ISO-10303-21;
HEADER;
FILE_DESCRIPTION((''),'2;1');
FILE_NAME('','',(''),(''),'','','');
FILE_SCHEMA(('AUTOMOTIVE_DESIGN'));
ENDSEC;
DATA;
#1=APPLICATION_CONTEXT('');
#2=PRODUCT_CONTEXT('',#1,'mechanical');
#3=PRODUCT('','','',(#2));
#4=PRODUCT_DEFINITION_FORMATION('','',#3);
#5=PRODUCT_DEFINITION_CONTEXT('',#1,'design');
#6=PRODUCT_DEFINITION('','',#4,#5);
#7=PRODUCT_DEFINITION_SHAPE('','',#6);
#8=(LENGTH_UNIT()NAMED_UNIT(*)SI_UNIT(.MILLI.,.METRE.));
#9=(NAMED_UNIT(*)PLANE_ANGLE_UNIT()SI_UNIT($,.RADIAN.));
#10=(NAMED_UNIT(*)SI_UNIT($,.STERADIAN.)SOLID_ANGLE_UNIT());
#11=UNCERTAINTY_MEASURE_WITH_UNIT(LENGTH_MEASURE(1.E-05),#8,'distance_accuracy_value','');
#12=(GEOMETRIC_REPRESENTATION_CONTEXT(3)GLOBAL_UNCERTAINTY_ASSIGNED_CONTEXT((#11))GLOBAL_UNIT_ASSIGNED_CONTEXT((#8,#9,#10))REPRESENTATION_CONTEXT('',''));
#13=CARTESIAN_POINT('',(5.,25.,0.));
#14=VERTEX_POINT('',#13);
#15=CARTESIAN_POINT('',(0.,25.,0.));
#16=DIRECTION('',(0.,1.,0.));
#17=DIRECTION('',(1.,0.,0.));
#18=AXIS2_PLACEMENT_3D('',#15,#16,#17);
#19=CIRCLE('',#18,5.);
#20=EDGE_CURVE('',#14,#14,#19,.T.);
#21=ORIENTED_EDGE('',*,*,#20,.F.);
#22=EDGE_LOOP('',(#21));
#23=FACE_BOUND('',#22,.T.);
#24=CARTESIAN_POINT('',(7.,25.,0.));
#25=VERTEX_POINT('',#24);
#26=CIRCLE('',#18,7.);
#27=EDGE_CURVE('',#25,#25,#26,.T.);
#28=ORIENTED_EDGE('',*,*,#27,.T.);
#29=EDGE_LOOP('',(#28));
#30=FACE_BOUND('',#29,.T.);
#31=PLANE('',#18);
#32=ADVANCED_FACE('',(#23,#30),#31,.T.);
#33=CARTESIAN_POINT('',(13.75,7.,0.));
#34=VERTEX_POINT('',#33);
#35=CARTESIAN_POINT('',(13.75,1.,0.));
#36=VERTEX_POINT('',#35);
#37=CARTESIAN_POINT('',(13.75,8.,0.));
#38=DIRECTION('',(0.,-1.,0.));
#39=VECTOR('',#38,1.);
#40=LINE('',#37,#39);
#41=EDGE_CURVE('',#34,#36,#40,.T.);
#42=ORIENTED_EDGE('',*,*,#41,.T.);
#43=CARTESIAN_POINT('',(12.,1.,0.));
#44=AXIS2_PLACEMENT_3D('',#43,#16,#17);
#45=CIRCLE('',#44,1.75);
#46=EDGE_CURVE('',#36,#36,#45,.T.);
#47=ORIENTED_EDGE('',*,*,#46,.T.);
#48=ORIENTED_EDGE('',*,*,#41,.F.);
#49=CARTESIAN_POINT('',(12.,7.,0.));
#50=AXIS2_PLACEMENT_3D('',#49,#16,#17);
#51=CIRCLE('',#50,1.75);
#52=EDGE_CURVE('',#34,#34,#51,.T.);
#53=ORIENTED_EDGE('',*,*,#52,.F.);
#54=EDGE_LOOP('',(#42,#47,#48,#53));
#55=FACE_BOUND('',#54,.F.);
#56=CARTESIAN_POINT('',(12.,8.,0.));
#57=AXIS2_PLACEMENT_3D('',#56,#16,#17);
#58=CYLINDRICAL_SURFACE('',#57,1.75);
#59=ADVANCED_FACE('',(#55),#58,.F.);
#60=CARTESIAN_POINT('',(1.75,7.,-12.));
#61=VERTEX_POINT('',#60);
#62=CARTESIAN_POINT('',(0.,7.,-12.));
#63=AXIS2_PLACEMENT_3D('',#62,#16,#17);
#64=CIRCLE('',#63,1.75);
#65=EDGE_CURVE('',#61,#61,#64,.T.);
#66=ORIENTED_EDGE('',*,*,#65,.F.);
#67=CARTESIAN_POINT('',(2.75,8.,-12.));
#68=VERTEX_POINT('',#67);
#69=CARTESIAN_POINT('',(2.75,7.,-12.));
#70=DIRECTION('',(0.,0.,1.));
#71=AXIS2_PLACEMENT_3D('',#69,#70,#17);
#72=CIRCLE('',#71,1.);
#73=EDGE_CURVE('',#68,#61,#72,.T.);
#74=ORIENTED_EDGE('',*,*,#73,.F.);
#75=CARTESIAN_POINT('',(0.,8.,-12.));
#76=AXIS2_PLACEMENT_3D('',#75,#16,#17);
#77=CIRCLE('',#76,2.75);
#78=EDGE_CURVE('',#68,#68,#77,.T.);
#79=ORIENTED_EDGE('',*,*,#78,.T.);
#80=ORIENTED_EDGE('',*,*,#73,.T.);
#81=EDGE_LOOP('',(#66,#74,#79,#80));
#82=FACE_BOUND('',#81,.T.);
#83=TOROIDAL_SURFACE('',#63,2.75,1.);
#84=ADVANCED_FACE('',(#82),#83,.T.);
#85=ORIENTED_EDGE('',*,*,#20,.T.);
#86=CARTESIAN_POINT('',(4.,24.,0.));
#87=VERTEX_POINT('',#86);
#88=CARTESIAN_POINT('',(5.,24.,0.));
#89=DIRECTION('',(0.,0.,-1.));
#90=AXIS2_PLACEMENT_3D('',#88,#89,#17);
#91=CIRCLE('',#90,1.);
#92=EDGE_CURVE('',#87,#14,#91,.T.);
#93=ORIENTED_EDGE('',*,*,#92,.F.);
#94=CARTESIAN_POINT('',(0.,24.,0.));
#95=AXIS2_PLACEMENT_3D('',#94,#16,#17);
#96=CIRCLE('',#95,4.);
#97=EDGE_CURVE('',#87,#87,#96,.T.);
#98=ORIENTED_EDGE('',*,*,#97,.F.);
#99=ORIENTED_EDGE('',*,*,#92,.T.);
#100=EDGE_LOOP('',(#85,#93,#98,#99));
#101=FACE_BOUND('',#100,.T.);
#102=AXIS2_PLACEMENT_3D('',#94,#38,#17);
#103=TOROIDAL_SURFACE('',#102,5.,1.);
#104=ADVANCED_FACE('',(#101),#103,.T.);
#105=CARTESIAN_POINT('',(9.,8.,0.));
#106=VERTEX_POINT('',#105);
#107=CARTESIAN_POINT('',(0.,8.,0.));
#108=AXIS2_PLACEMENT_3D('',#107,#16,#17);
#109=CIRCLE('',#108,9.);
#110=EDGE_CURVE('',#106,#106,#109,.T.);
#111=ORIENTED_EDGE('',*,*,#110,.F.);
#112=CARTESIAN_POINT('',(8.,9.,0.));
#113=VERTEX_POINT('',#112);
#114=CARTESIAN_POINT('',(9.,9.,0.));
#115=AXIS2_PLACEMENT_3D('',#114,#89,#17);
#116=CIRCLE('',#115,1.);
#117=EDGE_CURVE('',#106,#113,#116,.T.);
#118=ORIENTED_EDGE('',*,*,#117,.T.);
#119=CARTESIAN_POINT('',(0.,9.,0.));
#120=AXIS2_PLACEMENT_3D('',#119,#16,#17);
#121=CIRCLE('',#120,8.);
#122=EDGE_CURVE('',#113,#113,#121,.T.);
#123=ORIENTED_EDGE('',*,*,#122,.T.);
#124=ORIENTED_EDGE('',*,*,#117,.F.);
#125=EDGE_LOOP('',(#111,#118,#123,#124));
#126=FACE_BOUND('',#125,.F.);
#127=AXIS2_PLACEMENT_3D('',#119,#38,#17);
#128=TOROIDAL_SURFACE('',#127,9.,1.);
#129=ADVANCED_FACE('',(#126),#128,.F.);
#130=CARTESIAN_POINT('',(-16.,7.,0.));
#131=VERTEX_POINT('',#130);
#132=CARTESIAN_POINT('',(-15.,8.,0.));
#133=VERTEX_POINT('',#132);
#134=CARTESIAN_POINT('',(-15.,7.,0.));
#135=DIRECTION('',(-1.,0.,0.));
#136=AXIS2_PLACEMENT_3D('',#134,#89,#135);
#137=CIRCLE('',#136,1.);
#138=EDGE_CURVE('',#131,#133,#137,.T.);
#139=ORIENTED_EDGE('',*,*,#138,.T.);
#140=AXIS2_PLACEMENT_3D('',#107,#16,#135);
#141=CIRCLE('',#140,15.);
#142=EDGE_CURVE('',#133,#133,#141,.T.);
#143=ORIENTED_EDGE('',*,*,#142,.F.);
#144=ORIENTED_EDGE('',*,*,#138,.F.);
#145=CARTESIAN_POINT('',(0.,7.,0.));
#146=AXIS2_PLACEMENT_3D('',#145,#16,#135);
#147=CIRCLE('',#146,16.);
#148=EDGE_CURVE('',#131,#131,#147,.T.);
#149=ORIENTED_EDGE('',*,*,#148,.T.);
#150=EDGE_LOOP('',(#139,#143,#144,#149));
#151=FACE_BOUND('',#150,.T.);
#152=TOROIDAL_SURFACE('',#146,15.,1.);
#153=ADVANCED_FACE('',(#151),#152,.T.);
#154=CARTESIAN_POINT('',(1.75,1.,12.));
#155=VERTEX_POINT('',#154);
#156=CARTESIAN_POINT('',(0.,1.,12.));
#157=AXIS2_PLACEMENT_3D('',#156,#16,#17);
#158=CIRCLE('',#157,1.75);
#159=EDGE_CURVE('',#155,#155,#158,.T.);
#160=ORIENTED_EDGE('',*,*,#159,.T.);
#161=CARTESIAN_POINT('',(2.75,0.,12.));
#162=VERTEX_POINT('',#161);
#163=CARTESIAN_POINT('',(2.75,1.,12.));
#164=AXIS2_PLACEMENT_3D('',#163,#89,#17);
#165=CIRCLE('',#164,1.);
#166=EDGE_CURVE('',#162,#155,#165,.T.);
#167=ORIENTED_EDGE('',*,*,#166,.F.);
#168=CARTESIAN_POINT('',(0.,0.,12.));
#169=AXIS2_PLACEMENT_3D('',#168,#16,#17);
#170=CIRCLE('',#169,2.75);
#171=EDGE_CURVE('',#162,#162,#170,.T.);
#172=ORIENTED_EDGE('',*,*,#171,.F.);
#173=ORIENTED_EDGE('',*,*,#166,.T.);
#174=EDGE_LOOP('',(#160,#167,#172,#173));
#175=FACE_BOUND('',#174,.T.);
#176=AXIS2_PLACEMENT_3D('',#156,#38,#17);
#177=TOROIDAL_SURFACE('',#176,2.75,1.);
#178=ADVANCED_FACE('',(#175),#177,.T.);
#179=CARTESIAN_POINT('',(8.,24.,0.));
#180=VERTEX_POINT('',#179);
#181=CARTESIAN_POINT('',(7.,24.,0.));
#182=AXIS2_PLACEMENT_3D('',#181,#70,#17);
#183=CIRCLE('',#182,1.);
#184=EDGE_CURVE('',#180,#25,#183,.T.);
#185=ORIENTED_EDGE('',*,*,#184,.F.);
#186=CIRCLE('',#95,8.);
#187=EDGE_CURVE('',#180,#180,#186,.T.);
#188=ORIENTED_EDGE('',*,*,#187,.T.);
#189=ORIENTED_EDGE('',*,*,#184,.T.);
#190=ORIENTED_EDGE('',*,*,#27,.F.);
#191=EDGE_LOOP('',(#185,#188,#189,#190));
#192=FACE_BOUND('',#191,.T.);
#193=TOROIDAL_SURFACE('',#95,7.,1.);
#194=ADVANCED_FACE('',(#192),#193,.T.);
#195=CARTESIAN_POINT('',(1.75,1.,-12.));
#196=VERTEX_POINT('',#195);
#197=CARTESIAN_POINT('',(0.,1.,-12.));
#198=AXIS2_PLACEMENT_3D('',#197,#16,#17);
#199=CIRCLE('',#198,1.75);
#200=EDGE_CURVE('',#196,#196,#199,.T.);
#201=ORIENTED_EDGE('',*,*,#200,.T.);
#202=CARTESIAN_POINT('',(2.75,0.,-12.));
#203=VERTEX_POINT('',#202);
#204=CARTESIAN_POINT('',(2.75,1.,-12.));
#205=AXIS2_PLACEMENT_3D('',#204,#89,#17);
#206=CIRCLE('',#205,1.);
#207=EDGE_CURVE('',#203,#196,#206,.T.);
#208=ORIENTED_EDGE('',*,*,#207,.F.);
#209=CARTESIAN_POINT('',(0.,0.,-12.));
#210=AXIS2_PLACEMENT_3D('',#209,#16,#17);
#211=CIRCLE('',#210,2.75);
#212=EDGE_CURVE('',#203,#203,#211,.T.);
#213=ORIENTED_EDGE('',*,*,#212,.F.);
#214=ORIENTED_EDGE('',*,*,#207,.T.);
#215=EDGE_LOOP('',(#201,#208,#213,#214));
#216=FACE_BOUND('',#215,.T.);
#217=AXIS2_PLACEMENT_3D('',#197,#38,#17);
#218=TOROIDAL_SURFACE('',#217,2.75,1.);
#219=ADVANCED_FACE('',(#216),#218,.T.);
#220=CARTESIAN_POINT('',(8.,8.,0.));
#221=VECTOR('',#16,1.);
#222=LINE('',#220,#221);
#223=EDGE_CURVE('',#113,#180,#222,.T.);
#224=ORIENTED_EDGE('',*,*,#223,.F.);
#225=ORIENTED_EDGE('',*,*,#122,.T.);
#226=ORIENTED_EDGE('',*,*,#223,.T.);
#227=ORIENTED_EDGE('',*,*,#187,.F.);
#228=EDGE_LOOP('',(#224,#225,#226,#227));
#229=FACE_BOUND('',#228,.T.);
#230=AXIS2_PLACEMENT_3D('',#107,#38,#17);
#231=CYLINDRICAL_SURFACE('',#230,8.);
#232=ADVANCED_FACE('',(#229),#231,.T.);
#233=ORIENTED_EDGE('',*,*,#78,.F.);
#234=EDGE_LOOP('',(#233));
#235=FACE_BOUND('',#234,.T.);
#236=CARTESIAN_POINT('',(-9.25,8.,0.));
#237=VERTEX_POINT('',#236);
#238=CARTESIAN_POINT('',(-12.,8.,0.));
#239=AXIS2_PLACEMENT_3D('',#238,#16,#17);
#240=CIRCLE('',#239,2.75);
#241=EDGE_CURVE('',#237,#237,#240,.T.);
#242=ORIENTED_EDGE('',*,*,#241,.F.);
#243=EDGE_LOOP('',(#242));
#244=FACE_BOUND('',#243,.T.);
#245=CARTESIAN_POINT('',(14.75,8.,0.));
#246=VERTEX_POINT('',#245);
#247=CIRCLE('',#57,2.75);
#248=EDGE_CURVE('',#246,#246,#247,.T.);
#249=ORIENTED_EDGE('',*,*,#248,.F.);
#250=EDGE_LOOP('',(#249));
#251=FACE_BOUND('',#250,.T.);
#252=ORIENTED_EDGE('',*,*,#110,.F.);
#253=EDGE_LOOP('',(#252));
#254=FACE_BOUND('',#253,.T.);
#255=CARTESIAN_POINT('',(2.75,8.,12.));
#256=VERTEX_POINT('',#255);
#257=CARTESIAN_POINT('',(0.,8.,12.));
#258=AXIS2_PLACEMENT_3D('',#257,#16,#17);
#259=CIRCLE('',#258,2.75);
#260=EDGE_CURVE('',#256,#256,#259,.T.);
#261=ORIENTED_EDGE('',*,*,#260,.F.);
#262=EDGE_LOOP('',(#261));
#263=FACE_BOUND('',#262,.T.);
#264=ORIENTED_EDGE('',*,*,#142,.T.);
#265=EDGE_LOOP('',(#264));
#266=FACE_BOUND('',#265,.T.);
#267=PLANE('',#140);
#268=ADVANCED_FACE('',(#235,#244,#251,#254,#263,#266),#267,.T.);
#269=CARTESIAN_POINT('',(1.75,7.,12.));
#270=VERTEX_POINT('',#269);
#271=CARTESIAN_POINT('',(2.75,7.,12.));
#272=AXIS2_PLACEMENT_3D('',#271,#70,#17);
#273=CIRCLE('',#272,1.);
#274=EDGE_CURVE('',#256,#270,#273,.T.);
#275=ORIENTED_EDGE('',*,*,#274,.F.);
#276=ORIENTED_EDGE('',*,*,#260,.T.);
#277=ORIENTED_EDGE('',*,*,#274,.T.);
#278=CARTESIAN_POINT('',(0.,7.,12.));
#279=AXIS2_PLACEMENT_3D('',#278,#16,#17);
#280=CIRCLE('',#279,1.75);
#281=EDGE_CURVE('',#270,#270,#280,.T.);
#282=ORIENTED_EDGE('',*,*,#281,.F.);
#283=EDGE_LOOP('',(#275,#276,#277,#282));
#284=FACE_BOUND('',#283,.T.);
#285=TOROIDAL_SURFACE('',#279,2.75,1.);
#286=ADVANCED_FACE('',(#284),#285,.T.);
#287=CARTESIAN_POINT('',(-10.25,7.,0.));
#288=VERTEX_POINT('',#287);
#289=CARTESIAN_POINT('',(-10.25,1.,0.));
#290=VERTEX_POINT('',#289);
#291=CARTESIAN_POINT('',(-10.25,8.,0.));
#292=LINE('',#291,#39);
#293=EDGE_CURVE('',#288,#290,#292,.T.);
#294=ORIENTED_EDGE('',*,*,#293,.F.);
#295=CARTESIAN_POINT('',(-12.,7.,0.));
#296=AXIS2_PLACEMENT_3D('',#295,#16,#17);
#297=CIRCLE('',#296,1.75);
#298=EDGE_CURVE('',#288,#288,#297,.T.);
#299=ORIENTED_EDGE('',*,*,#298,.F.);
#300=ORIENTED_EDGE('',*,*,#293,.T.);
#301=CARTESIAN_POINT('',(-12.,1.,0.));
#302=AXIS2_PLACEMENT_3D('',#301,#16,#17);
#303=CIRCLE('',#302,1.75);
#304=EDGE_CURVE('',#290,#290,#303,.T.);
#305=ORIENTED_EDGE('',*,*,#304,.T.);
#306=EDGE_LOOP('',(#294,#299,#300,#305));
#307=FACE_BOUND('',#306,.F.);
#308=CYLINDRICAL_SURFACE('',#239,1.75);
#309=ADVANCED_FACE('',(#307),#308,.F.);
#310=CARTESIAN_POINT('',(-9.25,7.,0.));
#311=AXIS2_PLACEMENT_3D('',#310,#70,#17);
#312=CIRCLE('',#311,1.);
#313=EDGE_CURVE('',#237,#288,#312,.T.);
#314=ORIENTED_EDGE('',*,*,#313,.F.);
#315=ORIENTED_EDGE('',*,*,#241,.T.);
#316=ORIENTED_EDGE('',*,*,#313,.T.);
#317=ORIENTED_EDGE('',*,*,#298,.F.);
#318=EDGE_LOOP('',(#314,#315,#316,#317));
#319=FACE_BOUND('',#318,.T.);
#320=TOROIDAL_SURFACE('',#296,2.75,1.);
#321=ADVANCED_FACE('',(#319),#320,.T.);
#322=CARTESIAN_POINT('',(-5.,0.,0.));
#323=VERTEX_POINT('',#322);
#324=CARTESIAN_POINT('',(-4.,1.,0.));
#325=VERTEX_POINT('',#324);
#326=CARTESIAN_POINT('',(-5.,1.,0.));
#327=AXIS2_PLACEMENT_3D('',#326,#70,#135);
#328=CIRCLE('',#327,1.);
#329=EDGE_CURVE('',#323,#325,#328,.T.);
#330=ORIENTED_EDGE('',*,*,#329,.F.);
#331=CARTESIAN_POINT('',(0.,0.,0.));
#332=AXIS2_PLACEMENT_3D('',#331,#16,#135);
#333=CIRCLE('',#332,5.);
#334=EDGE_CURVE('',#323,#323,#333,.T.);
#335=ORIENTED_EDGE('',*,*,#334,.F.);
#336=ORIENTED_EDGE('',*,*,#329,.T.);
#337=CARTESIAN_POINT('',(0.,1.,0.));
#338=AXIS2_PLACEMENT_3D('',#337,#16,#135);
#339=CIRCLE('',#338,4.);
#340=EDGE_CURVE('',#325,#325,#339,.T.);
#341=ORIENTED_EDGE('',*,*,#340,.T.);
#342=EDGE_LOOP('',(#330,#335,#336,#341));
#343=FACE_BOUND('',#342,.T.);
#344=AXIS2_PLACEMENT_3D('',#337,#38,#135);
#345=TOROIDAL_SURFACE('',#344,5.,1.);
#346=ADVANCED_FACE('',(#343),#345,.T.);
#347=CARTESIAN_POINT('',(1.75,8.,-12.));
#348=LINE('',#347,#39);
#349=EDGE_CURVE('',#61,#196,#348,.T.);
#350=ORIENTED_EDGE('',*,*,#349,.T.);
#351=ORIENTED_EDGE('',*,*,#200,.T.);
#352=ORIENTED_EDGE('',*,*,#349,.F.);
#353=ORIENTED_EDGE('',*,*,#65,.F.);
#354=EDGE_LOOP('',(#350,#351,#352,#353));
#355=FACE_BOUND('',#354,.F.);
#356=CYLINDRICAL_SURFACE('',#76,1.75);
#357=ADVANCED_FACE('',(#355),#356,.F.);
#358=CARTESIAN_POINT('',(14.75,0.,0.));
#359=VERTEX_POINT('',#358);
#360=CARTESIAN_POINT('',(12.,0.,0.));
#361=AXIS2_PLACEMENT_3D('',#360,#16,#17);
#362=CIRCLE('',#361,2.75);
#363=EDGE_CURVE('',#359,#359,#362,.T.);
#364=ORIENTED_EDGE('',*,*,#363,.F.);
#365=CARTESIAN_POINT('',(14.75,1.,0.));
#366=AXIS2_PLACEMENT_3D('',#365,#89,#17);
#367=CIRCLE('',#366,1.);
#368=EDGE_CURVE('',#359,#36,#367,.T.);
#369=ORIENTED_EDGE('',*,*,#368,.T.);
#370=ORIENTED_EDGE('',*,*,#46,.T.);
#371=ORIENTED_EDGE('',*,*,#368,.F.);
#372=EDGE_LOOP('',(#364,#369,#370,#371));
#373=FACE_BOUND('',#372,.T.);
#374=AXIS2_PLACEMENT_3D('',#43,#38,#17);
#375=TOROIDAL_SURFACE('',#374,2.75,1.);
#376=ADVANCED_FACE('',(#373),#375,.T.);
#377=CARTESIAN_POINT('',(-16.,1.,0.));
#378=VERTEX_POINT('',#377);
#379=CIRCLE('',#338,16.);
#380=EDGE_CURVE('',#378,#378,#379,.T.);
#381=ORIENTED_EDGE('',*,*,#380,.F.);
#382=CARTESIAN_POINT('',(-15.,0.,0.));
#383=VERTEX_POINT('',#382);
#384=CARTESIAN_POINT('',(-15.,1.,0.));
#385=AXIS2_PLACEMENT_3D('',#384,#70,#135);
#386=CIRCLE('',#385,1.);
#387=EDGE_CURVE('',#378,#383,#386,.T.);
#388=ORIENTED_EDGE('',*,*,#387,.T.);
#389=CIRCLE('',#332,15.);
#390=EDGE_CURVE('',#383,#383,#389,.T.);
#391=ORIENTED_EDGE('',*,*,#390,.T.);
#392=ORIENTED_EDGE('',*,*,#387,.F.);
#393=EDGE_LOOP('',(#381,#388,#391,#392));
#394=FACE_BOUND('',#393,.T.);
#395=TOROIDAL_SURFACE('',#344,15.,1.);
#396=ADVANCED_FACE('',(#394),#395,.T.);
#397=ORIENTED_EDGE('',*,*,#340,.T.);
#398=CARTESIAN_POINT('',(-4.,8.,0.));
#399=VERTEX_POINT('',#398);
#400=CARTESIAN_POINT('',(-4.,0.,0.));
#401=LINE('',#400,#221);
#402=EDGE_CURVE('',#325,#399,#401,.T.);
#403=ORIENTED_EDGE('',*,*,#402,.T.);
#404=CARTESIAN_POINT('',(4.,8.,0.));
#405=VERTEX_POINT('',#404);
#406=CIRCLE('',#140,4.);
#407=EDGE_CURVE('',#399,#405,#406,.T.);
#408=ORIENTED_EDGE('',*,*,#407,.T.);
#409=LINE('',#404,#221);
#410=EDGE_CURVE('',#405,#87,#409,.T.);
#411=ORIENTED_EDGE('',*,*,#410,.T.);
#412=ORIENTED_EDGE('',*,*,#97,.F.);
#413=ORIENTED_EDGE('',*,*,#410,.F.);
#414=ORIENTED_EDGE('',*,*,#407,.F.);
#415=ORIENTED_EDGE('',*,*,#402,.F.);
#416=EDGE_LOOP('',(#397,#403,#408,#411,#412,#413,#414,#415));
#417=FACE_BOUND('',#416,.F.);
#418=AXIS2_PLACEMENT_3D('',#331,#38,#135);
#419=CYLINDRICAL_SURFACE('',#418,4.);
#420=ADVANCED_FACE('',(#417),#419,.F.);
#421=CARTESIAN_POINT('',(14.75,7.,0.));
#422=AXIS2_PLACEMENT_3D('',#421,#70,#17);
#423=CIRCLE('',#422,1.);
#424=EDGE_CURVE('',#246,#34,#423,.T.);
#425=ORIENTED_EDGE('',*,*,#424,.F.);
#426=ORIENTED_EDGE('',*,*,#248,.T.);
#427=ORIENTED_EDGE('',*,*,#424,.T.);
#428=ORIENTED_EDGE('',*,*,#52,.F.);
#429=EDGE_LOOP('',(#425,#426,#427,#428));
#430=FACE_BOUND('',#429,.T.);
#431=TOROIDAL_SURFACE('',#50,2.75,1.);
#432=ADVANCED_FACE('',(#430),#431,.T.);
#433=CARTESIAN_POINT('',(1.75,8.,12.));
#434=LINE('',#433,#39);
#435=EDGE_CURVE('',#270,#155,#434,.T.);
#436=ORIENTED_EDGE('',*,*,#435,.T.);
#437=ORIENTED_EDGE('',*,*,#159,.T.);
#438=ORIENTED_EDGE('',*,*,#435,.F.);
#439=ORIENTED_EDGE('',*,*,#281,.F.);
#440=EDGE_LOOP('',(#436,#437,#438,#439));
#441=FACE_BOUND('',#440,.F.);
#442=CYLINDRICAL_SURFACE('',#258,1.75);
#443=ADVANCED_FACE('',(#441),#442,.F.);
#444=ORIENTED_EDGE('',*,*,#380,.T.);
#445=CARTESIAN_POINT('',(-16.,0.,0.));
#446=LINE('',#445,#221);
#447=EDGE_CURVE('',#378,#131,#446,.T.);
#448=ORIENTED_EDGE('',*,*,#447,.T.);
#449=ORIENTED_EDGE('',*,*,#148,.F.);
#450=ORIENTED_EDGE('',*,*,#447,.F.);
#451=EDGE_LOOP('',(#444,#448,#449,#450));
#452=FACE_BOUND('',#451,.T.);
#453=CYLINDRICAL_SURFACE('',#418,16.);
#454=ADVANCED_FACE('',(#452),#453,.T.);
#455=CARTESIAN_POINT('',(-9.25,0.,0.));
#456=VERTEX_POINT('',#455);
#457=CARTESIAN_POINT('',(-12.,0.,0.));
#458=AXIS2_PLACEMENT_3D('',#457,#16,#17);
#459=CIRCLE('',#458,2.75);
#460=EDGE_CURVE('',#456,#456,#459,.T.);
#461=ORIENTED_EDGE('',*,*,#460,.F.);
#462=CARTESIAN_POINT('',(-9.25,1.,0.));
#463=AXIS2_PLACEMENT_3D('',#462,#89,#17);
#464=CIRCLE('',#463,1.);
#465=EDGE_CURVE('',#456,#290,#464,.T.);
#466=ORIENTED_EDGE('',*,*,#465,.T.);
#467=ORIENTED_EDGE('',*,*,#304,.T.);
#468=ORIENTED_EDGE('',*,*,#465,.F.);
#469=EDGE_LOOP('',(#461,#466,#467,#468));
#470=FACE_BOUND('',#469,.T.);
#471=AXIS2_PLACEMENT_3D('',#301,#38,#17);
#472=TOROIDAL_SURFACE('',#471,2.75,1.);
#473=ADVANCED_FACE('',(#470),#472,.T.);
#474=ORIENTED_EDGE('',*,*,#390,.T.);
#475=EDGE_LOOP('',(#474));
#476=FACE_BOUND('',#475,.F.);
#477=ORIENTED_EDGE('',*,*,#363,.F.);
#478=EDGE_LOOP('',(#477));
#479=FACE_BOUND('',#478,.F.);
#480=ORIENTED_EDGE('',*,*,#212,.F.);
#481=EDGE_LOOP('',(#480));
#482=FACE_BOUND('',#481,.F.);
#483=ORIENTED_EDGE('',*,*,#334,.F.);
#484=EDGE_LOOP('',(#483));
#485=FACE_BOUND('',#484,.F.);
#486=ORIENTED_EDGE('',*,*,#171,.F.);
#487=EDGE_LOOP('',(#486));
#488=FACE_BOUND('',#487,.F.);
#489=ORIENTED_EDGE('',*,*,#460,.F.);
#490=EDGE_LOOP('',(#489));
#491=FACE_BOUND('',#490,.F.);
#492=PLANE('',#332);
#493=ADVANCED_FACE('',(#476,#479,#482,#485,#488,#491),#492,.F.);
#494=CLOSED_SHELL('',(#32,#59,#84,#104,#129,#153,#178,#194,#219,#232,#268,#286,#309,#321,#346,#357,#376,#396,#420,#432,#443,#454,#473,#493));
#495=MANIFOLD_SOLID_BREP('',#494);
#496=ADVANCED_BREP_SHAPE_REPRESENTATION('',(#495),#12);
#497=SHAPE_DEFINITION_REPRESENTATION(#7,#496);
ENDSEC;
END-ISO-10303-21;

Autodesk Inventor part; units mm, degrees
ref_plane "YZ Plane" through (0, 0, 0) normal (1, 0, 0) x (0, 1, 0)
ref_plane "XZ Plane" through (0, 0, 0) normal (0, 1, 0) x (-1, 0, 0)
ref_plane "XY Plane" through (0, 0, 0) normal (0, 0, 1) x (1, 0, 0)
sketch "Sketch1" plane through (0, 0, 0) normal (0, 1, 0) x (-1, 0, 0)
  circle A0 centre (0, 0) radius 16
  circle A1 centre (0, 0) radius 4
  dimension "d0" = 32
  dimension "d1" = 8
extrude "Extrusion1" add sketch "Sketch1" along normal blind 8
sketch "Sketch2" plane through (0, 8, 0) normal (0, 1, 0) x (1, 0, 0)
  circle A0 centre (0, 0) radius 4
  circle A1 centre (0, 0) radius 8
  dimension "d4" = 16
  dimension "d5" = 8
extrude "Extrusion2" add sketch "Sketch2" along normal blind 17
sketch "Sketch3" plane through (0, 8, 0) normal (0, 1, 0) x (1, 0, 0)
  circle A0 centre (12, 0) radius 1.75
  circle A1 centre (0, 12) radius 1.75
  circle A2 centre (-12, 0) radius 1.75
  circle A3 centre (0, -12) radius 1.75
  line L0 (0, -17.2279) -> (0, 18.5252) construction
  line L1 (18.42, 0) -> (-19.0524, 0) construction
  point P0 (0, 0)
  dimension "d8" = 12
  dimension "d9" = 12
  dimension "d10" = 12
  dimension "d11" = 12
  dimension "d12" = 3.5
  dimension "d13" = 3.5
  dimension "d14" = 3.5
  dimension "d15" = 3.5
extrude "Extrusion3" cut sketch "Sketch3" against normal blind 20
fillet "Fillet1" radius 1 6 edges at (16, 8, 0) (16, 0, 0) (-4, 25, 0) (-8, 25, 0) (-8, 8, 0) (4, 0, 0)
fillet "Fillet2" radius 1 8 edges at (-13.75, 8, 0) (-1.75, 8, 12) (10.25, 8, 0) (-1.75, 8, -12) (-1.75, 0, 12) (10.25, 0, 0) (-1.75, 0, -12) (-13.75, 0, 0)
properties part number "Gehaeuselager_8mm"
